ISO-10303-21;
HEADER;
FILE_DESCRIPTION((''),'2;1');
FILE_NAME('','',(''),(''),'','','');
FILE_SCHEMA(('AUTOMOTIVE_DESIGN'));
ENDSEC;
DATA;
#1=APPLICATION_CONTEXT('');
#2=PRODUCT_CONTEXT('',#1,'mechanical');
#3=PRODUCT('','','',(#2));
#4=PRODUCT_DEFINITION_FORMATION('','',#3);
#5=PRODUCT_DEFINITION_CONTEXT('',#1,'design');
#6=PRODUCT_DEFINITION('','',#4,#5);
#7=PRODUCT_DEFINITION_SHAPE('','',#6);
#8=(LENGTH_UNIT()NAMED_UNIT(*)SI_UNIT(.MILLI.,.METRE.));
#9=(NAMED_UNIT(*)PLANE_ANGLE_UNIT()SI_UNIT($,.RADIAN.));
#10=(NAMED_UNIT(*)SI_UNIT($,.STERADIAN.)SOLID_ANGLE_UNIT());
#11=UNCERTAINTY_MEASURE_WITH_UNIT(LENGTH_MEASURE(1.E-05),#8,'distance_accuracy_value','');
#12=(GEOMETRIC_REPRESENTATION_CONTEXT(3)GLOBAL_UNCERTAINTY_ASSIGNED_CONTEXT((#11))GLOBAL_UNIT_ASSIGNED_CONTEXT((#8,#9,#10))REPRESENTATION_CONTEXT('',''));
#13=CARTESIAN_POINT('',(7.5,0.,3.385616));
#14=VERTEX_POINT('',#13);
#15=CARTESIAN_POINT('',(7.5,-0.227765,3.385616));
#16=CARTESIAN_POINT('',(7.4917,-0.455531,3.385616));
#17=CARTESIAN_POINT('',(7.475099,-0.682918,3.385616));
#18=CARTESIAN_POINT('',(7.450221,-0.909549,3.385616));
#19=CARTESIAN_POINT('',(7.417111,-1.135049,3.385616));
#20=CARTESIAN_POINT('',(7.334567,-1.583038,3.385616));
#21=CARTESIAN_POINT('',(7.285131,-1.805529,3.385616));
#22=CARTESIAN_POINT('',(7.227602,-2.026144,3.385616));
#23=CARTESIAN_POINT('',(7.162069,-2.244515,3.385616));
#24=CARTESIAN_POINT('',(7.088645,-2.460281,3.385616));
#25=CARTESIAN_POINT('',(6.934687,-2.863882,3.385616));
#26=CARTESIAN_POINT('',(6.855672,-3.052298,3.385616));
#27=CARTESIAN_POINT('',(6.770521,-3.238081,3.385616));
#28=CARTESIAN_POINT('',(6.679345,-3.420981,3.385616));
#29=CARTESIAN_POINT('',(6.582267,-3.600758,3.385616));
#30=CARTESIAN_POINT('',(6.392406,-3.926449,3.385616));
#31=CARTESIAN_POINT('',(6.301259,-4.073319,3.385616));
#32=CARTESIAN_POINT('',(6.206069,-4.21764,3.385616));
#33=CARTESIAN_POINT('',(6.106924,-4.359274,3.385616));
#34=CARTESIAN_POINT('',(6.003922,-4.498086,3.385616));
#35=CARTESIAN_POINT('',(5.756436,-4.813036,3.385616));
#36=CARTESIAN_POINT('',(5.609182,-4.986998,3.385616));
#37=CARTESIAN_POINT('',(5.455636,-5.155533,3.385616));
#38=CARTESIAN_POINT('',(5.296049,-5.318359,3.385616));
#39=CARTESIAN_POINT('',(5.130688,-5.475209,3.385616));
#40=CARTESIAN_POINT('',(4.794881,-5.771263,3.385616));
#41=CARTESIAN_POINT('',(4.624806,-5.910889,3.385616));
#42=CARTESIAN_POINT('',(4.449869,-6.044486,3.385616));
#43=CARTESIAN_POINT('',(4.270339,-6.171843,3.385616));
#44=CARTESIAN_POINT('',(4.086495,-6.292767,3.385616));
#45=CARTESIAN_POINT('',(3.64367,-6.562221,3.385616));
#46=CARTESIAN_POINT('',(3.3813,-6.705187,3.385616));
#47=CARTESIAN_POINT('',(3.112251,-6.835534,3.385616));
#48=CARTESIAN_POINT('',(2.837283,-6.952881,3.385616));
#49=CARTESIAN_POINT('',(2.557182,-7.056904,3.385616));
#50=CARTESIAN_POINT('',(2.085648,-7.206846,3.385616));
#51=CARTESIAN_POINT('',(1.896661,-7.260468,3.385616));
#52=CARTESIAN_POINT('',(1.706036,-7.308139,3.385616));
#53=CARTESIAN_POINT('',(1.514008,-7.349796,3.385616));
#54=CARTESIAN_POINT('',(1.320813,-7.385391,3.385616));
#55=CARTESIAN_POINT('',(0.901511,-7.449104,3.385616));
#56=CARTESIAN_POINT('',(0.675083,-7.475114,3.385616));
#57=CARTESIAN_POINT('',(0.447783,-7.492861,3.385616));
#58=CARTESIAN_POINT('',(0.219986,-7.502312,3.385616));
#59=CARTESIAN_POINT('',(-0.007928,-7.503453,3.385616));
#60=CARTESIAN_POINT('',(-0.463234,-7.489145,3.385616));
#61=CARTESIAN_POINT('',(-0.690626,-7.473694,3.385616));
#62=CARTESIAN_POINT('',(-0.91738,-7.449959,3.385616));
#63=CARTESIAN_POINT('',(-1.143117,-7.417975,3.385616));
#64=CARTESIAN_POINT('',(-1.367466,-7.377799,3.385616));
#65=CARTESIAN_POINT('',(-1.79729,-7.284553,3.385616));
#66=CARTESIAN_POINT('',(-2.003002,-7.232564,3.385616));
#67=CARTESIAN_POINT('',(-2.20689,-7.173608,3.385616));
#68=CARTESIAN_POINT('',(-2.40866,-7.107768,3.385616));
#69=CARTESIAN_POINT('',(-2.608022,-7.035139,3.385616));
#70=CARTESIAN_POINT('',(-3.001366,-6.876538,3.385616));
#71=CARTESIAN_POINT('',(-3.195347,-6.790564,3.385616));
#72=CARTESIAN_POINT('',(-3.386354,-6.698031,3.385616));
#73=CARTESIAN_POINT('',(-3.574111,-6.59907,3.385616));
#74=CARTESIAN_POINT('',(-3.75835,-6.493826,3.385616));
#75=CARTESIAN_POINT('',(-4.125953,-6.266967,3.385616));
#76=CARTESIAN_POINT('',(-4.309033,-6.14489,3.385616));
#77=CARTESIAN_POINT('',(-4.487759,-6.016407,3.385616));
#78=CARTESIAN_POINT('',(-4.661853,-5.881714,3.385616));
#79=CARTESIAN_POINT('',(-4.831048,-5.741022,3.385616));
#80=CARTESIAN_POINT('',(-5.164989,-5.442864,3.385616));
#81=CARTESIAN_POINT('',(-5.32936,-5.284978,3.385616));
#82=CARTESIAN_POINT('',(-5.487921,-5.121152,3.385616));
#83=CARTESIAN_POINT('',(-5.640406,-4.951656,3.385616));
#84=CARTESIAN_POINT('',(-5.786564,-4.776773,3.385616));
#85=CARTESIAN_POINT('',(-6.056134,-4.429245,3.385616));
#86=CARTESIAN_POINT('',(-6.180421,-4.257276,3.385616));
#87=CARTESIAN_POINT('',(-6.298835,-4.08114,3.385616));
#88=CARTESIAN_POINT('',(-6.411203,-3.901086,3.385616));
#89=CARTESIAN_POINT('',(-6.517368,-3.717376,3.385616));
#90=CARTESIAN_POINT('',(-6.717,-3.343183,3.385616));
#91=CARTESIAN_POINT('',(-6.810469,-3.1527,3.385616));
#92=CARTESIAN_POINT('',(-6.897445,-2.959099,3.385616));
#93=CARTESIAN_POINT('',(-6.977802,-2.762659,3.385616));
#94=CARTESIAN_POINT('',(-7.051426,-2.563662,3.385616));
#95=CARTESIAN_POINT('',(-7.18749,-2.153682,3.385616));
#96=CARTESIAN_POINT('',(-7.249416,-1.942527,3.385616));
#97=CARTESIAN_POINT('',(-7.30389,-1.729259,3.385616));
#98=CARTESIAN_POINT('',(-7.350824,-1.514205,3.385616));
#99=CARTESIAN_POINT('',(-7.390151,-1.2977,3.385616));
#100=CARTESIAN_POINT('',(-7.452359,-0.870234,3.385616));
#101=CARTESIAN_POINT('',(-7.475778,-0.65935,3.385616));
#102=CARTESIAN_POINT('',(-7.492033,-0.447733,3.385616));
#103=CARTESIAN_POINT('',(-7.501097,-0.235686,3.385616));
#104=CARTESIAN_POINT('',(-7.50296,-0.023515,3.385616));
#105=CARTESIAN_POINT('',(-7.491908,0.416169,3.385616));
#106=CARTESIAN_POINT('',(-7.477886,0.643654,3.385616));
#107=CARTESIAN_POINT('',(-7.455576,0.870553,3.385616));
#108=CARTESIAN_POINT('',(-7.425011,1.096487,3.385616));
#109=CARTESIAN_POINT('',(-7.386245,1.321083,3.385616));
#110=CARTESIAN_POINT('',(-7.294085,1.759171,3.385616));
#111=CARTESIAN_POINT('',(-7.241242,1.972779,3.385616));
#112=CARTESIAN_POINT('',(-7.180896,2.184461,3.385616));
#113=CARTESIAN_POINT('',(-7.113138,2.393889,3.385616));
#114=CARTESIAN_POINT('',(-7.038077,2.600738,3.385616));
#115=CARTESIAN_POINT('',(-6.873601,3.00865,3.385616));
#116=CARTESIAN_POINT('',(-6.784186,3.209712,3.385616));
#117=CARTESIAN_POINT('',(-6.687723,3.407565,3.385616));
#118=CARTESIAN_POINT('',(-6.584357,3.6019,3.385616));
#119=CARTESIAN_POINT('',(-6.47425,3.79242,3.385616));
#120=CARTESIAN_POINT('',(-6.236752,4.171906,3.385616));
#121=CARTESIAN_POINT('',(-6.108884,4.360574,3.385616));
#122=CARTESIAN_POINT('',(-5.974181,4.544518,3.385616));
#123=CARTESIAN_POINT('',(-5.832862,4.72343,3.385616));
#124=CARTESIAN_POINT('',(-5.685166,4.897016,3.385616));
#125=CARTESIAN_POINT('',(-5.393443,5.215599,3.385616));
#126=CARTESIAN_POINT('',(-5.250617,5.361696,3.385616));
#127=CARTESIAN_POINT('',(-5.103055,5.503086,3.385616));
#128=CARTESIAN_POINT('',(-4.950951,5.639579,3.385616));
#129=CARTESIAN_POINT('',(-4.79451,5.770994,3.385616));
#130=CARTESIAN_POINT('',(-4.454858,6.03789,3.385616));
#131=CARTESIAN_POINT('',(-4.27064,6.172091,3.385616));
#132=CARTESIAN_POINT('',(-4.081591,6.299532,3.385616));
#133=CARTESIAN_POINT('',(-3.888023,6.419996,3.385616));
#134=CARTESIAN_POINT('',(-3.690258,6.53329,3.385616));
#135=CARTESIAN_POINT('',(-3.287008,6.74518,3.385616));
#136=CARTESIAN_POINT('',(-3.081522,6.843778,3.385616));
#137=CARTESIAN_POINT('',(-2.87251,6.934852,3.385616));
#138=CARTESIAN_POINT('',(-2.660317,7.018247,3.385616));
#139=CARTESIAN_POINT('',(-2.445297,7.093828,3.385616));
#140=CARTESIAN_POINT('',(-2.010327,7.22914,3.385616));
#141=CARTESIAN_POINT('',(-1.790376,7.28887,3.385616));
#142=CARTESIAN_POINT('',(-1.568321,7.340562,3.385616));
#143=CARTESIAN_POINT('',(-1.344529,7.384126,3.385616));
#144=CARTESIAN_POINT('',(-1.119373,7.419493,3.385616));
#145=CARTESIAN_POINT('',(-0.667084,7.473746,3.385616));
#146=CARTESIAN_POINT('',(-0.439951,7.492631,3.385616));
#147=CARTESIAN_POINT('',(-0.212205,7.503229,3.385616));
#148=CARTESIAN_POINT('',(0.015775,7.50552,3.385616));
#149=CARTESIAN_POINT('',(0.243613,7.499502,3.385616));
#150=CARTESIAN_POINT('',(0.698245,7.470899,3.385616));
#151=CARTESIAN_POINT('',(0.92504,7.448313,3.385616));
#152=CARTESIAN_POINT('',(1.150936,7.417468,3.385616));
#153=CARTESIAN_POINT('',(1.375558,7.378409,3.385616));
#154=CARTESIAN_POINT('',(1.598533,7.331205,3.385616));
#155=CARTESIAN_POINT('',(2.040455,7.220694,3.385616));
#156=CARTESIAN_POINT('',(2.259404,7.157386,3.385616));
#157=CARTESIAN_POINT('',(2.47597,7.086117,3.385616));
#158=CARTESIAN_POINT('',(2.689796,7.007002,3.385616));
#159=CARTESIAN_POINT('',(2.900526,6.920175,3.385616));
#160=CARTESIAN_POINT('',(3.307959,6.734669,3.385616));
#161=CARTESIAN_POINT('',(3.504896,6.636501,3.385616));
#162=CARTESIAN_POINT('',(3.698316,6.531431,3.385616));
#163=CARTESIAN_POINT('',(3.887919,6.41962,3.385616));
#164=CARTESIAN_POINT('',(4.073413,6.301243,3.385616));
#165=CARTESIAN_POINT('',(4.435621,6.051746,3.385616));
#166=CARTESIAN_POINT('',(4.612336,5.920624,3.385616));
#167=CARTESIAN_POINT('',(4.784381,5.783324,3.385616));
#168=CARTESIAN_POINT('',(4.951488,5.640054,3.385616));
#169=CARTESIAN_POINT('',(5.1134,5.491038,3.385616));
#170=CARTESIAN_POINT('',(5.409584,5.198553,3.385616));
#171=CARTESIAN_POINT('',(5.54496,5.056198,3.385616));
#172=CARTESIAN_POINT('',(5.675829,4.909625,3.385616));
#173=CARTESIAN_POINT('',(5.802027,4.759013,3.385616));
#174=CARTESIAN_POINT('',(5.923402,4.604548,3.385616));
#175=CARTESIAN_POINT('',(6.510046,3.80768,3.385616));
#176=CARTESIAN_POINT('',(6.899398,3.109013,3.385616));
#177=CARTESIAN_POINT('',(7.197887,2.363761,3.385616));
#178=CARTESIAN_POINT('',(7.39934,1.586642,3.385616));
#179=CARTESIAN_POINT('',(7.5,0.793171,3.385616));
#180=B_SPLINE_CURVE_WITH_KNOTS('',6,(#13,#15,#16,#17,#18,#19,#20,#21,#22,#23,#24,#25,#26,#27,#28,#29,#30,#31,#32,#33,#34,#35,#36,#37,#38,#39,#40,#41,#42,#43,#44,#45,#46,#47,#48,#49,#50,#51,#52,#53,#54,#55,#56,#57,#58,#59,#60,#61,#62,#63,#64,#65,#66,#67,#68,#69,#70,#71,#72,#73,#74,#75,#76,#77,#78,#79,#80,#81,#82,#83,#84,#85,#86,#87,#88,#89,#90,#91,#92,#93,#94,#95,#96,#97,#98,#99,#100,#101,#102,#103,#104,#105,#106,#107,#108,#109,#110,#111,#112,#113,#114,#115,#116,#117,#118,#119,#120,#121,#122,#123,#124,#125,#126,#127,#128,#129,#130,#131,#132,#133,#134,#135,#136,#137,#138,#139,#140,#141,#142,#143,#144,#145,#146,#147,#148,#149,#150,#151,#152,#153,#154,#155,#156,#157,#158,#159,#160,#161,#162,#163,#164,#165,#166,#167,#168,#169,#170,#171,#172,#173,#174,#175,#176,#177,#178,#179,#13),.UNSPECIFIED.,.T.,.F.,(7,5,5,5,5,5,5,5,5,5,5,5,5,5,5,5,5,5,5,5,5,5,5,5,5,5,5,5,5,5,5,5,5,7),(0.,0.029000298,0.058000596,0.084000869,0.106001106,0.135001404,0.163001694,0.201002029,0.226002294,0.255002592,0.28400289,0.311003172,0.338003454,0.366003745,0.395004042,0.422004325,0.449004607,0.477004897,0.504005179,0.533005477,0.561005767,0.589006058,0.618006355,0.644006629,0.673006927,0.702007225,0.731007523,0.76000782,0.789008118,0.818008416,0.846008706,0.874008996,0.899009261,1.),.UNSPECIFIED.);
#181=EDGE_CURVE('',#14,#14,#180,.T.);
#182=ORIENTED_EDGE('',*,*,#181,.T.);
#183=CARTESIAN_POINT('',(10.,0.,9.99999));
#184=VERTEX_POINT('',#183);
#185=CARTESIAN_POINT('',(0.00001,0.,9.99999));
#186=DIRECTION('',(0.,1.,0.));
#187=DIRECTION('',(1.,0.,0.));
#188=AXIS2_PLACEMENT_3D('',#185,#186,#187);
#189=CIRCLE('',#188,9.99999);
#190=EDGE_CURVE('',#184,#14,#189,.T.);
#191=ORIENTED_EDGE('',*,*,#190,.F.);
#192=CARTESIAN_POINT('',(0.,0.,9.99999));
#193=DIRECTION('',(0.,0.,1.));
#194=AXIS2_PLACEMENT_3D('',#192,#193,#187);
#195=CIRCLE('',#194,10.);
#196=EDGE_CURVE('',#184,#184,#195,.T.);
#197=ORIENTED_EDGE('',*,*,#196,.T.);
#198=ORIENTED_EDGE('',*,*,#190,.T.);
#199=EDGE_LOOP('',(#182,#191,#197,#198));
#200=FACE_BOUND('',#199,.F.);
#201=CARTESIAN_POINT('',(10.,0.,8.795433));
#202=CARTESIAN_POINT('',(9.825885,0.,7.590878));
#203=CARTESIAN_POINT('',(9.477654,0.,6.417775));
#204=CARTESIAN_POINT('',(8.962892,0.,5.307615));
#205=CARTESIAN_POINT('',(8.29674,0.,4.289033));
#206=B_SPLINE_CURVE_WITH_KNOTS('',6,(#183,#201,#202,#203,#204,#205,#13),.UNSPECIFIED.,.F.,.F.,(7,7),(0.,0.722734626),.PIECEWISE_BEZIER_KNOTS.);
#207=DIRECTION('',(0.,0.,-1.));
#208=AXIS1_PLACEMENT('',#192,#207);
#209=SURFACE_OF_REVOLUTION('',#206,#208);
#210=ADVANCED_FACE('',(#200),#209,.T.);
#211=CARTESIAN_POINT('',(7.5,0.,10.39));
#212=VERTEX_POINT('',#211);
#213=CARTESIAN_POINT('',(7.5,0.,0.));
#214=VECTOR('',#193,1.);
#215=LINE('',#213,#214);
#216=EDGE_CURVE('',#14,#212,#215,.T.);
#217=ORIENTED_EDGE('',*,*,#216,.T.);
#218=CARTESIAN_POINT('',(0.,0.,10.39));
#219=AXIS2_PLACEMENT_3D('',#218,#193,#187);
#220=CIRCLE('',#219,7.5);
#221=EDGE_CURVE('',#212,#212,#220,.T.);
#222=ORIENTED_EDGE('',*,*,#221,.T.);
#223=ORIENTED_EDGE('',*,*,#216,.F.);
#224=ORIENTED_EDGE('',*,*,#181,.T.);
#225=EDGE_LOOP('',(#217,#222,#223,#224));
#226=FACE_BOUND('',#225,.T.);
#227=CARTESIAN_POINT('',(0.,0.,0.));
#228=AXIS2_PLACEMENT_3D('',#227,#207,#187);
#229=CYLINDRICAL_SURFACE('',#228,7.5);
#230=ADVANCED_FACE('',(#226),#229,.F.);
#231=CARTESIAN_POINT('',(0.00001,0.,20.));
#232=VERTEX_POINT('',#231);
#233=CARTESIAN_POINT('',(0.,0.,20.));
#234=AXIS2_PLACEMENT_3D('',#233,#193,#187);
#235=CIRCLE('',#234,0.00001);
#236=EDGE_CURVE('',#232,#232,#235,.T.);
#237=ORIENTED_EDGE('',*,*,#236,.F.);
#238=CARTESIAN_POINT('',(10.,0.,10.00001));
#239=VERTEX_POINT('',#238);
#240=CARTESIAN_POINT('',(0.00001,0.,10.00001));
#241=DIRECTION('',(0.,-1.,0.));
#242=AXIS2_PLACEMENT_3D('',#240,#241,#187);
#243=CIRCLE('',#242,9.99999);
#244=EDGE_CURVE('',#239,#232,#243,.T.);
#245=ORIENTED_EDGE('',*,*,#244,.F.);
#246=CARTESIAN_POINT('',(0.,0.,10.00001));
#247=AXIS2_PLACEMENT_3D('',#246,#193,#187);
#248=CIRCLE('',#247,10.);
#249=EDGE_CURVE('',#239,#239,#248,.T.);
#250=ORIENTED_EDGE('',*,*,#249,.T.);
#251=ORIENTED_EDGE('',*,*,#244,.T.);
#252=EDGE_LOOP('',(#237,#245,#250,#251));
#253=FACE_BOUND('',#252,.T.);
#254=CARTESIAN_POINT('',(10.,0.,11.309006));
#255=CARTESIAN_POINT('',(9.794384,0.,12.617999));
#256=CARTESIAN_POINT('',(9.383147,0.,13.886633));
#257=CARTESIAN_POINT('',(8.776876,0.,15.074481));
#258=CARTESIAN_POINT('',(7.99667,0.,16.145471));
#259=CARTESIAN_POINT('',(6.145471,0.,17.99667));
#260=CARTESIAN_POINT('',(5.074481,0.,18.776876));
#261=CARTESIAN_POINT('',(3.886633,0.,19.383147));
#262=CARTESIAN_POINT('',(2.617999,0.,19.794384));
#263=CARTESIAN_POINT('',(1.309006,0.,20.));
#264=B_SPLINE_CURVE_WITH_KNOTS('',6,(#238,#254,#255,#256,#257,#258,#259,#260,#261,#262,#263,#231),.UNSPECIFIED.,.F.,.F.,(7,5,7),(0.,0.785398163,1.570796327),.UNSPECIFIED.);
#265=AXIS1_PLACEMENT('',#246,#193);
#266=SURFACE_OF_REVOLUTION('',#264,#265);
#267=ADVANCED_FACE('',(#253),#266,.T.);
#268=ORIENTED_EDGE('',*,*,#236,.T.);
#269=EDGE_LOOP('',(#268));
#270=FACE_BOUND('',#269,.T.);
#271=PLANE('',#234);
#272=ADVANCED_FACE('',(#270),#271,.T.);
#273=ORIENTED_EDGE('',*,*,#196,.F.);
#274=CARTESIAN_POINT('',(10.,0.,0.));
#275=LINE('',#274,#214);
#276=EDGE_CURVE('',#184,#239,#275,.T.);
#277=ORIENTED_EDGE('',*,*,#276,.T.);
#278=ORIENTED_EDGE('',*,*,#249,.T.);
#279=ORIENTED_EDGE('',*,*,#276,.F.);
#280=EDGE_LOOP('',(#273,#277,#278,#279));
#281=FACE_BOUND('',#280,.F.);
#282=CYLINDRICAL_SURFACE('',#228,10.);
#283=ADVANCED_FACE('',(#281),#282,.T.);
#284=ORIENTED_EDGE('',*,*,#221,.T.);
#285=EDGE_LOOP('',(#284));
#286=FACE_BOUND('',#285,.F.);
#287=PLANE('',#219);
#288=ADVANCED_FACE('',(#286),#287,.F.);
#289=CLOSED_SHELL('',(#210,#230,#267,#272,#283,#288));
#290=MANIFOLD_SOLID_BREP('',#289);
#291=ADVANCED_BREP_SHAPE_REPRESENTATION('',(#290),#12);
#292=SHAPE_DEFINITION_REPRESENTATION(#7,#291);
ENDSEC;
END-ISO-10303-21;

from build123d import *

# Parameters (mm, degrees)
F0_R     = 10
F1_DEPTH = 20
F2_R     = 9.99999
F3_R     = 7.5
F4_DEPTH = 10.39


# Not quite as in the source:
# - a fillet or chamfer is up to 0.001 mm smaller than in the source, because OpenCascade refuses the exact size


with BuildPart() as f1:
    # F0 (on Top) → F1 (new body)
    with BuildSketch(Plane.XY):
        Circle(F0_R)
    extrude(amount=F1_DEPTH)

    # F2 (radius 10 in the source; OpenCascade refuses exactly that, so slightly less here)
    f2_edges = [f1.edges().sort_by_distance(p)[0] for p in [
        (-10, 0, 20),
        (-10, 0, 0),
    ]]
    fillet(f2_edges, radius=F2_R)

    # F3 (on Top) → F4 (cut)
    with BuildSketch(Plane.XY):
        Circle(F3_R)
    extrude(amount=F4_DEPTH, mode=Mode.SUBTRACT)


solid = f1.part
